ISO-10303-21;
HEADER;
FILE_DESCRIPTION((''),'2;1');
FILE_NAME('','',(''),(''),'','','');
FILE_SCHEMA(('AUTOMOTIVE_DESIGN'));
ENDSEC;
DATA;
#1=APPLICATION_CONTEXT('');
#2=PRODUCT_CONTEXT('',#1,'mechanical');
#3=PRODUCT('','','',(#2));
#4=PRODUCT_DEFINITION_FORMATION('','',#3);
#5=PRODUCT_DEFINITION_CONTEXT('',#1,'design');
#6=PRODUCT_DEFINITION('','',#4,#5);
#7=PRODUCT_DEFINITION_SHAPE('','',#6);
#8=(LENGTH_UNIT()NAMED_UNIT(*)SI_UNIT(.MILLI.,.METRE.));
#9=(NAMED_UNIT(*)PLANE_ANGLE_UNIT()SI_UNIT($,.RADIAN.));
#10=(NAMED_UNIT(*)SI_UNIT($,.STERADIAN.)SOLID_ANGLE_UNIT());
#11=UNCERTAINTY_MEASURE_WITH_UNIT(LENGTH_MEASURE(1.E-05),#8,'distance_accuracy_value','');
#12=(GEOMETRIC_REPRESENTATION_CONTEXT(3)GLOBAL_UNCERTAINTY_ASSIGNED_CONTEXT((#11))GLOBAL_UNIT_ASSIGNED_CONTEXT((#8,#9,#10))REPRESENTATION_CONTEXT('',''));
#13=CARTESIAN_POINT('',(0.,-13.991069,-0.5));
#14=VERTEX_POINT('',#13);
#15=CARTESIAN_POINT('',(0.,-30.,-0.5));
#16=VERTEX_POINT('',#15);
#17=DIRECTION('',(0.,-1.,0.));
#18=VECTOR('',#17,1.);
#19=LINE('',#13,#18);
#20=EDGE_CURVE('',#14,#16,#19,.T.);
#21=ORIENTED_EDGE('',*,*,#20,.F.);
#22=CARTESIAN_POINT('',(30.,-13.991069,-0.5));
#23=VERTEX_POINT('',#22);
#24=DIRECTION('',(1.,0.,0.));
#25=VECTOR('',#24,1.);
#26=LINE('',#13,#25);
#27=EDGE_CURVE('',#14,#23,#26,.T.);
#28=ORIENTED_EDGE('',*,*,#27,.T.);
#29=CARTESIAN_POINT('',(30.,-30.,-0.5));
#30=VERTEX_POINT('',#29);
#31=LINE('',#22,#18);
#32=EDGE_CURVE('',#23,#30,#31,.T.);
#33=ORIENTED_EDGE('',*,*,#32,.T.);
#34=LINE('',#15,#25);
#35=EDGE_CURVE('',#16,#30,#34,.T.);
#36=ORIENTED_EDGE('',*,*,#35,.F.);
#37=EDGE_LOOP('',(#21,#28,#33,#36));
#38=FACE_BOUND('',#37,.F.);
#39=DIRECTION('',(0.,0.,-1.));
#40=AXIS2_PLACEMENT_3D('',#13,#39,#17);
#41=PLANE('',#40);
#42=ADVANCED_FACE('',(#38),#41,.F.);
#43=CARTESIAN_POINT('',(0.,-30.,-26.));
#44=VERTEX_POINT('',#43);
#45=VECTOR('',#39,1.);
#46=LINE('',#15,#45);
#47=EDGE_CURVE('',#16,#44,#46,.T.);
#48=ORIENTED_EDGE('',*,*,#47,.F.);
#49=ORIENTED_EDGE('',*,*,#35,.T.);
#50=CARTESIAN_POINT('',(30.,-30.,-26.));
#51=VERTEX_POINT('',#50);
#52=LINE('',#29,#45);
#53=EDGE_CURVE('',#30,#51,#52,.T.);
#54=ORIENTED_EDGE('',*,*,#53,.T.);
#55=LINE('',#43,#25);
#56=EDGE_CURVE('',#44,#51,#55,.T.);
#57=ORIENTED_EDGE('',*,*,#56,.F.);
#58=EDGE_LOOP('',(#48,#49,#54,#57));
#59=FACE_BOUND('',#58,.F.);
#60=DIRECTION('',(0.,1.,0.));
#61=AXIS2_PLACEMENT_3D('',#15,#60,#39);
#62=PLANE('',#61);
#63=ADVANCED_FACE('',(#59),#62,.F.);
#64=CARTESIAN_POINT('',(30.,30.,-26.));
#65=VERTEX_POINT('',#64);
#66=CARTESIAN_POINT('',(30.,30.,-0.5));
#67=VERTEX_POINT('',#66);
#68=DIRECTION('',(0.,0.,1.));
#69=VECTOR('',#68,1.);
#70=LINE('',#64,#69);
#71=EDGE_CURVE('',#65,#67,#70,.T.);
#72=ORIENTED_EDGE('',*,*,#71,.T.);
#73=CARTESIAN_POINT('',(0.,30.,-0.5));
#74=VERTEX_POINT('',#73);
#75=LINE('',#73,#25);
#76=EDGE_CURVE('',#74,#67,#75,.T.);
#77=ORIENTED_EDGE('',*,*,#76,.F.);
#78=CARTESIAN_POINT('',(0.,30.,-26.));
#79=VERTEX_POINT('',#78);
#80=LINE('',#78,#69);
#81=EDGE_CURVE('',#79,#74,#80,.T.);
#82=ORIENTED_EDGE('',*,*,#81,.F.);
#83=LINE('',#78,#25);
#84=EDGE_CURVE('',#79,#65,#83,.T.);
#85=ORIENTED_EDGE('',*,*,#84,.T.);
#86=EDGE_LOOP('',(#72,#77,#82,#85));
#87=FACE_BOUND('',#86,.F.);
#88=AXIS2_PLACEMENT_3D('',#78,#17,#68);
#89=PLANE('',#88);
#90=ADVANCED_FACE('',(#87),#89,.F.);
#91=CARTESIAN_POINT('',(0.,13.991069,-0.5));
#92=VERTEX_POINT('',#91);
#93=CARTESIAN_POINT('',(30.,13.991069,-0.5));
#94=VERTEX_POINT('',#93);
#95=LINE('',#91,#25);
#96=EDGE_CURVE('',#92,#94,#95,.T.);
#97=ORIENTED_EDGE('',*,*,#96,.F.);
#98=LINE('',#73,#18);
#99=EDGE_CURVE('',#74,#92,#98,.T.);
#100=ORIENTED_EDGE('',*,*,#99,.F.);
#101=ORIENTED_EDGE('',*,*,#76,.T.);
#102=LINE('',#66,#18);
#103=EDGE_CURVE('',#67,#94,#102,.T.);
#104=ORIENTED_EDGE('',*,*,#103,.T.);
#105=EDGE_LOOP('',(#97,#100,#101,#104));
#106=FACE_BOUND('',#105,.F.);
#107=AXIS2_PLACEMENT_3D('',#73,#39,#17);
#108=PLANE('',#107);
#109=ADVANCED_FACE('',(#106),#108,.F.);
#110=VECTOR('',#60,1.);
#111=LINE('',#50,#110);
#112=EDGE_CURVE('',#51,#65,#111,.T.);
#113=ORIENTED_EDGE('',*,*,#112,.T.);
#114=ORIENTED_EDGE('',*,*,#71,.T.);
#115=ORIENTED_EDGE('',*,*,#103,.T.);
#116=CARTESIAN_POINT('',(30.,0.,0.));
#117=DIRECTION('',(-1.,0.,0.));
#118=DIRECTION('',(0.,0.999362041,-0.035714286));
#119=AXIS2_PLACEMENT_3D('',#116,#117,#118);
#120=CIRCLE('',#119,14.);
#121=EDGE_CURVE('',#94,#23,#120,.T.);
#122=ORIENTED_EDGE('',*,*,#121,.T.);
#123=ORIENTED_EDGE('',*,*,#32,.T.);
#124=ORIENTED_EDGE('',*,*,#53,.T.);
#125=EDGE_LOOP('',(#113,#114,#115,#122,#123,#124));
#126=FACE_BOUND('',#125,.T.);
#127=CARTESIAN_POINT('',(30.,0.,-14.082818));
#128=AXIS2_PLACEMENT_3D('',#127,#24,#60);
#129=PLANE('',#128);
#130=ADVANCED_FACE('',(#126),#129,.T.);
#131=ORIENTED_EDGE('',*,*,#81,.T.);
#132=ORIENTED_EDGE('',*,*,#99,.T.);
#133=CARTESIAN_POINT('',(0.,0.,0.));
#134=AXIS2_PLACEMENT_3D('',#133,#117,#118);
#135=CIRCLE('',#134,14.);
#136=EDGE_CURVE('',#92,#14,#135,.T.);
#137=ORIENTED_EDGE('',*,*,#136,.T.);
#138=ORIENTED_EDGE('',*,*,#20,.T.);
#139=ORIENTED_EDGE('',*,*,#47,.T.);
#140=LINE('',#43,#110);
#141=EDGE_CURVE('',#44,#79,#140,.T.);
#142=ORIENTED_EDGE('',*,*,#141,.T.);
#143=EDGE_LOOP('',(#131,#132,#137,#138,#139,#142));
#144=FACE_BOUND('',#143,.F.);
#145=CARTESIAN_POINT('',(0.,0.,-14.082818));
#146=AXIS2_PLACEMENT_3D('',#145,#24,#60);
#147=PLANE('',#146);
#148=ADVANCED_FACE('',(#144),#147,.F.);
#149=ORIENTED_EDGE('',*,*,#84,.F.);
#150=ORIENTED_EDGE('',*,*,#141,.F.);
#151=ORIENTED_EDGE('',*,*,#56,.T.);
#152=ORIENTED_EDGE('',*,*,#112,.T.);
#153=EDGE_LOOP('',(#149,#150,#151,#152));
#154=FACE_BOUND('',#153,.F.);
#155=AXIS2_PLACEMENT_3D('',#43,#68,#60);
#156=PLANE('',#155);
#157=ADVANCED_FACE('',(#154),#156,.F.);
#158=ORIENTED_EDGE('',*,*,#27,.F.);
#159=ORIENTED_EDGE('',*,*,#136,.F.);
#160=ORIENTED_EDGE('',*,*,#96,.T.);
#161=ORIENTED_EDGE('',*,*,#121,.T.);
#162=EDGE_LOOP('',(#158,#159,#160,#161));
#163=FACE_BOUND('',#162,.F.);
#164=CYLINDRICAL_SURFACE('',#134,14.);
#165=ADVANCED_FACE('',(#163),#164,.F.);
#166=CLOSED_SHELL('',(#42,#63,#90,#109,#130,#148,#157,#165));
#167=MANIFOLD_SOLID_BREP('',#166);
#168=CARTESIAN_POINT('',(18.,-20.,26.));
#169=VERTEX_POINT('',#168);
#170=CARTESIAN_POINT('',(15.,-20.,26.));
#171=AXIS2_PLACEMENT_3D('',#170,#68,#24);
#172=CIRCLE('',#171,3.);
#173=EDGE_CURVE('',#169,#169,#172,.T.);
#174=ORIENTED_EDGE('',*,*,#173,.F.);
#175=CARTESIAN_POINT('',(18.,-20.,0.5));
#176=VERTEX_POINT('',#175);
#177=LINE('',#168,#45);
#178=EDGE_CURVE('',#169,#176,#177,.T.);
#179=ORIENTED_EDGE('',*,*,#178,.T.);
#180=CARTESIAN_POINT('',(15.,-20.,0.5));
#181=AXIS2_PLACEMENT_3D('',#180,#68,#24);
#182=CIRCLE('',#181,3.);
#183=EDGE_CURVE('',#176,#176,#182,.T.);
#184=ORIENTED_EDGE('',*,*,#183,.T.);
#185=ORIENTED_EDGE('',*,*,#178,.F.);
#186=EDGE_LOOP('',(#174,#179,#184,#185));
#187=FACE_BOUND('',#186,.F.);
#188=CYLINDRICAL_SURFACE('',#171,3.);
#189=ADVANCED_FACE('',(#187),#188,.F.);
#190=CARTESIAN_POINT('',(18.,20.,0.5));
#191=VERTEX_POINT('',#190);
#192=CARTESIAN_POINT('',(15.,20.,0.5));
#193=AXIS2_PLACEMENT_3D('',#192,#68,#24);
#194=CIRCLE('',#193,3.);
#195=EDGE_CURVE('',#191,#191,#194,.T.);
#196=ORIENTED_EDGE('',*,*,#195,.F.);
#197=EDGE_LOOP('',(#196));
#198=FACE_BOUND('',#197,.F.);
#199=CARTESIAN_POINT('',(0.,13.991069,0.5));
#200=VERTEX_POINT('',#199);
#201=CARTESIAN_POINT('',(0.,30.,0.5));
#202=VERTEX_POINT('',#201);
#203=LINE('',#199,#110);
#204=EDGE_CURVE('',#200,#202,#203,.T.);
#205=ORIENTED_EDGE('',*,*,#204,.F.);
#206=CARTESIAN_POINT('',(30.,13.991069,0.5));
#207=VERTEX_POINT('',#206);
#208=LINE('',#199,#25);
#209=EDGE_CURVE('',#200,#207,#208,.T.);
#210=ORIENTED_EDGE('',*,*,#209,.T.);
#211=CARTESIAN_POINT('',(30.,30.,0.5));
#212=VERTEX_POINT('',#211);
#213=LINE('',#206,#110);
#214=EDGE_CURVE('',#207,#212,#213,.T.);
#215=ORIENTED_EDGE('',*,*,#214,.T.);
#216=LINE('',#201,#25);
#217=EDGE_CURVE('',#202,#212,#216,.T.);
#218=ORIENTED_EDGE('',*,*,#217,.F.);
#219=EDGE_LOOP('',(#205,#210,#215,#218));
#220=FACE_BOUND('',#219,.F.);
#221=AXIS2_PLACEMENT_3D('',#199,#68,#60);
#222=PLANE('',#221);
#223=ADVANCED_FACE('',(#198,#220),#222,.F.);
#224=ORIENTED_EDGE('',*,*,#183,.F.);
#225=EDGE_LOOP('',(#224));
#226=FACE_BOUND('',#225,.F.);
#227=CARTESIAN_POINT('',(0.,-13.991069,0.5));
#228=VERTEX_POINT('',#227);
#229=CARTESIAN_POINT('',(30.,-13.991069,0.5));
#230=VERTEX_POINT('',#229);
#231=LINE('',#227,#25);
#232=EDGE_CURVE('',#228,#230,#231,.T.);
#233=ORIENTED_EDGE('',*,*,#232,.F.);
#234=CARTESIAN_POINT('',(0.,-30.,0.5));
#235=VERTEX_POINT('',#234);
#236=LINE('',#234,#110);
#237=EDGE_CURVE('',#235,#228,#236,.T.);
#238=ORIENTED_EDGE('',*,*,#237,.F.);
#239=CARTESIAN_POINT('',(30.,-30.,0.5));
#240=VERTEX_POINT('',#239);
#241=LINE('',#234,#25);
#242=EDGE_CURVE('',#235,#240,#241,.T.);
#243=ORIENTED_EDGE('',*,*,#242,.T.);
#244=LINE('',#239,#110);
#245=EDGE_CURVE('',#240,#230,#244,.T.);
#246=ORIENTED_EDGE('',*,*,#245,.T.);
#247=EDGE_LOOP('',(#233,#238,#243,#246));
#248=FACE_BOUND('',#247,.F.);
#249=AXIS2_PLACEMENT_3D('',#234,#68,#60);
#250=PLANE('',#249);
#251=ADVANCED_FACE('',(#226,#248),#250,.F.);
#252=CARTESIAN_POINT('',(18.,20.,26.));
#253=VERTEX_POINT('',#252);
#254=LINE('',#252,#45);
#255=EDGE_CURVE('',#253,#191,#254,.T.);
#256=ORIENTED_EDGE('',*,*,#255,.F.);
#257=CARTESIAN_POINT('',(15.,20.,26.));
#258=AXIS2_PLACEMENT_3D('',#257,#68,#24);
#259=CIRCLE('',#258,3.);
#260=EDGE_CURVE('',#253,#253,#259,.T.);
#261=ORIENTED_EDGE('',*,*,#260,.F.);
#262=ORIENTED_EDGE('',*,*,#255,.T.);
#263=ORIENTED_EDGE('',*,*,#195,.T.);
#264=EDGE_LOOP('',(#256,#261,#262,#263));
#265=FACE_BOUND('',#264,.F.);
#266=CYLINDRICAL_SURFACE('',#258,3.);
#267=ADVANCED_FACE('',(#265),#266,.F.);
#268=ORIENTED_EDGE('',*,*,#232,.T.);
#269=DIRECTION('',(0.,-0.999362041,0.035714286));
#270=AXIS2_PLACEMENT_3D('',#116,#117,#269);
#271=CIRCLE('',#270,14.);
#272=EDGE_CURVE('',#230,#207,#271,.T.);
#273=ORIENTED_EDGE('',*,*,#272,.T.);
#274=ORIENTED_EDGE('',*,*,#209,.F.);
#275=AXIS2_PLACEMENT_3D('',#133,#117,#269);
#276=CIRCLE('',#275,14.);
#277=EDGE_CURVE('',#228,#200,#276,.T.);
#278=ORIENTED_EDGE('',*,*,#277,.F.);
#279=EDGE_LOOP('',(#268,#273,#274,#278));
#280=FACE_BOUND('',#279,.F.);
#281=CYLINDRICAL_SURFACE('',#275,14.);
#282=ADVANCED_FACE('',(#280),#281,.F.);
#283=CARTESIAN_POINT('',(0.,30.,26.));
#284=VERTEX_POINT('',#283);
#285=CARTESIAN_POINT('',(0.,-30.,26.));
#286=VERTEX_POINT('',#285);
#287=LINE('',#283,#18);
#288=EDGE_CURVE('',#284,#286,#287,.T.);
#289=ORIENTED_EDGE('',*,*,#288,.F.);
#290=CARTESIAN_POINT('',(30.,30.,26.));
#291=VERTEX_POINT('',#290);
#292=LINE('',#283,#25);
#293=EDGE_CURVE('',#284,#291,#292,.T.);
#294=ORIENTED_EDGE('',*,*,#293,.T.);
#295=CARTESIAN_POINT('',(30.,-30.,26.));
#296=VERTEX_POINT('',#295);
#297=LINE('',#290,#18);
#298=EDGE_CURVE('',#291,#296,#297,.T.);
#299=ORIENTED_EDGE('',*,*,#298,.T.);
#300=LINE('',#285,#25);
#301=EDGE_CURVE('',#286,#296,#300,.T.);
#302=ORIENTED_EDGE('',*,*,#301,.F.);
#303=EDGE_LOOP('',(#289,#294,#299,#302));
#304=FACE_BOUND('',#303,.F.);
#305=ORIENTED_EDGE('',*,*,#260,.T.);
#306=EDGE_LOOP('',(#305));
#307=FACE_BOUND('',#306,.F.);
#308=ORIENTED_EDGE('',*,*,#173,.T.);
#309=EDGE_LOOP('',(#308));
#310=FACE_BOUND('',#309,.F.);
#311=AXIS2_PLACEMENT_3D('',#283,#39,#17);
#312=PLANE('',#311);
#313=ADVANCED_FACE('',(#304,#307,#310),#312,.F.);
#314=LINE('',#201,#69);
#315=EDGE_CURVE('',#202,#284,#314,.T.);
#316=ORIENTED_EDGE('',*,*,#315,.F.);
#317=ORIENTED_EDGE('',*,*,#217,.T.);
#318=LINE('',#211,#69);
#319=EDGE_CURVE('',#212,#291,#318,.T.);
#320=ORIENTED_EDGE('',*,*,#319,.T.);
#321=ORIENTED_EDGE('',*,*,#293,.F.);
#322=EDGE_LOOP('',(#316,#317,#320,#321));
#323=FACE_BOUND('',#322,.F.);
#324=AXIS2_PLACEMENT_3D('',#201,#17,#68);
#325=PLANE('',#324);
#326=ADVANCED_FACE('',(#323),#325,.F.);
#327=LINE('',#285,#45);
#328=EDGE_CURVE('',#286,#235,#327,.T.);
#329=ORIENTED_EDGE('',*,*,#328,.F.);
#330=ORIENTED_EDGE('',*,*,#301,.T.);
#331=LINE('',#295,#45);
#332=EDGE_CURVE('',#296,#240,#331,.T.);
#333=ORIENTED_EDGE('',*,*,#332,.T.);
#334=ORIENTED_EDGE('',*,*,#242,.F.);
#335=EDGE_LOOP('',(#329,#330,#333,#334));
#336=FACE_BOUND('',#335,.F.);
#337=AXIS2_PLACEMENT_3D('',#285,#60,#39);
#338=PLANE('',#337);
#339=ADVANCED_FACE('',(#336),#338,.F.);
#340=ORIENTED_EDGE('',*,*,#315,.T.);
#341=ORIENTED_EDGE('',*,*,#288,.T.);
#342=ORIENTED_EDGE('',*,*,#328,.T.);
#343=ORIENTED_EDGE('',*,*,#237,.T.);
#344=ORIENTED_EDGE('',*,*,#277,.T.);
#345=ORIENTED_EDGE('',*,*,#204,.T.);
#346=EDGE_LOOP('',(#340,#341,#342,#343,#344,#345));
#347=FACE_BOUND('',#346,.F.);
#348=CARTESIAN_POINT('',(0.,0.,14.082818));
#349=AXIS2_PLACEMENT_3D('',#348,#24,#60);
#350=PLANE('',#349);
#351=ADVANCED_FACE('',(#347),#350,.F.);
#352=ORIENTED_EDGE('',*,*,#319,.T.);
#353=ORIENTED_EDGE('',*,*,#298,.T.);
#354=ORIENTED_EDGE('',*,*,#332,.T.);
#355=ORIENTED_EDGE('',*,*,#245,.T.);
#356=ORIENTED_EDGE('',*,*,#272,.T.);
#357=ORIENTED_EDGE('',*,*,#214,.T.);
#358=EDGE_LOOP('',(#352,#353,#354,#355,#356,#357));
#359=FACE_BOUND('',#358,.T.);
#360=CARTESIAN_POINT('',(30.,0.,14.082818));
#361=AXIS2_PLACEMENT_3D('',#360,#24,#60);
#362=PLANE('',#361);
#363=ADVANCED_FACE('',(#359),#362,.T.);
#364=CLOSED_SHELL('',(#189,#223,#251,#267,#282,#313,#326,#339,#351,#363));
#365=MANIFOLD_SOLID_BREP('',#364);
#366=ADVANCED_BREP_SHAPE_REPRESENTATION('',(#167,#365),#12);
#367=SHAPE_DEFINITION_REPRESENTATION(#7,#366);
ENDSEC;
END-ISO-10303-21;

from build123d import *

# Parameters (mm, degrees)
F1_DEPTH = 30
F2_R     = 3
F3_DEPTH = 52


with BuildPart() as f1:
    # F0 (on Right) → F1 (new body)
    with BuildSketch(Plane.YZ):
        with BuildLine():
            Line((-30, -26), (30, -26))
            Line((30, -26), (30, -0.5))
            Line((30, -0.5), (13.9910685796, -0.5))
            ThreePointArc((13.9910685796, -0.5), (0, -14), (-13.9910685796, -0.5))
            Line((-13.9910685796, -0.5), (-30, -0.5))
            Line((-30, -0.5), (-30, -26))
        make_face()
    extrude(amount=F1_DEPTH)


with BuildPart() as f1b:
    # F0 (on Right) → F1, piece 2 (new body)
    with BuildSketch(Plane.YZ):
        with BuildLine():
            Line((30, 0.5), (30, 26))
            Line((30, 26), (-30, 26))
            Line((-30, 26), (-30, 0.5))
            Line((-30, 0.5), (-13.9910685796, 0.5))
            ThreePointArc((-13.9910685796, 0.5), (0, 14), (13.9910685796, 0.5))
            Line((13.9910685796, 0.5), (30, 0.5))
        make_face()
    extrude(amount=F1_DEPTH)

    # F2 (on face) → F3 (cut)
    with BuildSketch(Plane.XY.offset(26)):
        with Locations((15, 20)):
            Circle(F2_R)
        with Locations((15, -20)):
            Circle(F2_R)
    extrude(amount=-F3_DEPTH, mode=Mode.SUBTRACT)


solid = Compound([f1.part, f1b.part])
